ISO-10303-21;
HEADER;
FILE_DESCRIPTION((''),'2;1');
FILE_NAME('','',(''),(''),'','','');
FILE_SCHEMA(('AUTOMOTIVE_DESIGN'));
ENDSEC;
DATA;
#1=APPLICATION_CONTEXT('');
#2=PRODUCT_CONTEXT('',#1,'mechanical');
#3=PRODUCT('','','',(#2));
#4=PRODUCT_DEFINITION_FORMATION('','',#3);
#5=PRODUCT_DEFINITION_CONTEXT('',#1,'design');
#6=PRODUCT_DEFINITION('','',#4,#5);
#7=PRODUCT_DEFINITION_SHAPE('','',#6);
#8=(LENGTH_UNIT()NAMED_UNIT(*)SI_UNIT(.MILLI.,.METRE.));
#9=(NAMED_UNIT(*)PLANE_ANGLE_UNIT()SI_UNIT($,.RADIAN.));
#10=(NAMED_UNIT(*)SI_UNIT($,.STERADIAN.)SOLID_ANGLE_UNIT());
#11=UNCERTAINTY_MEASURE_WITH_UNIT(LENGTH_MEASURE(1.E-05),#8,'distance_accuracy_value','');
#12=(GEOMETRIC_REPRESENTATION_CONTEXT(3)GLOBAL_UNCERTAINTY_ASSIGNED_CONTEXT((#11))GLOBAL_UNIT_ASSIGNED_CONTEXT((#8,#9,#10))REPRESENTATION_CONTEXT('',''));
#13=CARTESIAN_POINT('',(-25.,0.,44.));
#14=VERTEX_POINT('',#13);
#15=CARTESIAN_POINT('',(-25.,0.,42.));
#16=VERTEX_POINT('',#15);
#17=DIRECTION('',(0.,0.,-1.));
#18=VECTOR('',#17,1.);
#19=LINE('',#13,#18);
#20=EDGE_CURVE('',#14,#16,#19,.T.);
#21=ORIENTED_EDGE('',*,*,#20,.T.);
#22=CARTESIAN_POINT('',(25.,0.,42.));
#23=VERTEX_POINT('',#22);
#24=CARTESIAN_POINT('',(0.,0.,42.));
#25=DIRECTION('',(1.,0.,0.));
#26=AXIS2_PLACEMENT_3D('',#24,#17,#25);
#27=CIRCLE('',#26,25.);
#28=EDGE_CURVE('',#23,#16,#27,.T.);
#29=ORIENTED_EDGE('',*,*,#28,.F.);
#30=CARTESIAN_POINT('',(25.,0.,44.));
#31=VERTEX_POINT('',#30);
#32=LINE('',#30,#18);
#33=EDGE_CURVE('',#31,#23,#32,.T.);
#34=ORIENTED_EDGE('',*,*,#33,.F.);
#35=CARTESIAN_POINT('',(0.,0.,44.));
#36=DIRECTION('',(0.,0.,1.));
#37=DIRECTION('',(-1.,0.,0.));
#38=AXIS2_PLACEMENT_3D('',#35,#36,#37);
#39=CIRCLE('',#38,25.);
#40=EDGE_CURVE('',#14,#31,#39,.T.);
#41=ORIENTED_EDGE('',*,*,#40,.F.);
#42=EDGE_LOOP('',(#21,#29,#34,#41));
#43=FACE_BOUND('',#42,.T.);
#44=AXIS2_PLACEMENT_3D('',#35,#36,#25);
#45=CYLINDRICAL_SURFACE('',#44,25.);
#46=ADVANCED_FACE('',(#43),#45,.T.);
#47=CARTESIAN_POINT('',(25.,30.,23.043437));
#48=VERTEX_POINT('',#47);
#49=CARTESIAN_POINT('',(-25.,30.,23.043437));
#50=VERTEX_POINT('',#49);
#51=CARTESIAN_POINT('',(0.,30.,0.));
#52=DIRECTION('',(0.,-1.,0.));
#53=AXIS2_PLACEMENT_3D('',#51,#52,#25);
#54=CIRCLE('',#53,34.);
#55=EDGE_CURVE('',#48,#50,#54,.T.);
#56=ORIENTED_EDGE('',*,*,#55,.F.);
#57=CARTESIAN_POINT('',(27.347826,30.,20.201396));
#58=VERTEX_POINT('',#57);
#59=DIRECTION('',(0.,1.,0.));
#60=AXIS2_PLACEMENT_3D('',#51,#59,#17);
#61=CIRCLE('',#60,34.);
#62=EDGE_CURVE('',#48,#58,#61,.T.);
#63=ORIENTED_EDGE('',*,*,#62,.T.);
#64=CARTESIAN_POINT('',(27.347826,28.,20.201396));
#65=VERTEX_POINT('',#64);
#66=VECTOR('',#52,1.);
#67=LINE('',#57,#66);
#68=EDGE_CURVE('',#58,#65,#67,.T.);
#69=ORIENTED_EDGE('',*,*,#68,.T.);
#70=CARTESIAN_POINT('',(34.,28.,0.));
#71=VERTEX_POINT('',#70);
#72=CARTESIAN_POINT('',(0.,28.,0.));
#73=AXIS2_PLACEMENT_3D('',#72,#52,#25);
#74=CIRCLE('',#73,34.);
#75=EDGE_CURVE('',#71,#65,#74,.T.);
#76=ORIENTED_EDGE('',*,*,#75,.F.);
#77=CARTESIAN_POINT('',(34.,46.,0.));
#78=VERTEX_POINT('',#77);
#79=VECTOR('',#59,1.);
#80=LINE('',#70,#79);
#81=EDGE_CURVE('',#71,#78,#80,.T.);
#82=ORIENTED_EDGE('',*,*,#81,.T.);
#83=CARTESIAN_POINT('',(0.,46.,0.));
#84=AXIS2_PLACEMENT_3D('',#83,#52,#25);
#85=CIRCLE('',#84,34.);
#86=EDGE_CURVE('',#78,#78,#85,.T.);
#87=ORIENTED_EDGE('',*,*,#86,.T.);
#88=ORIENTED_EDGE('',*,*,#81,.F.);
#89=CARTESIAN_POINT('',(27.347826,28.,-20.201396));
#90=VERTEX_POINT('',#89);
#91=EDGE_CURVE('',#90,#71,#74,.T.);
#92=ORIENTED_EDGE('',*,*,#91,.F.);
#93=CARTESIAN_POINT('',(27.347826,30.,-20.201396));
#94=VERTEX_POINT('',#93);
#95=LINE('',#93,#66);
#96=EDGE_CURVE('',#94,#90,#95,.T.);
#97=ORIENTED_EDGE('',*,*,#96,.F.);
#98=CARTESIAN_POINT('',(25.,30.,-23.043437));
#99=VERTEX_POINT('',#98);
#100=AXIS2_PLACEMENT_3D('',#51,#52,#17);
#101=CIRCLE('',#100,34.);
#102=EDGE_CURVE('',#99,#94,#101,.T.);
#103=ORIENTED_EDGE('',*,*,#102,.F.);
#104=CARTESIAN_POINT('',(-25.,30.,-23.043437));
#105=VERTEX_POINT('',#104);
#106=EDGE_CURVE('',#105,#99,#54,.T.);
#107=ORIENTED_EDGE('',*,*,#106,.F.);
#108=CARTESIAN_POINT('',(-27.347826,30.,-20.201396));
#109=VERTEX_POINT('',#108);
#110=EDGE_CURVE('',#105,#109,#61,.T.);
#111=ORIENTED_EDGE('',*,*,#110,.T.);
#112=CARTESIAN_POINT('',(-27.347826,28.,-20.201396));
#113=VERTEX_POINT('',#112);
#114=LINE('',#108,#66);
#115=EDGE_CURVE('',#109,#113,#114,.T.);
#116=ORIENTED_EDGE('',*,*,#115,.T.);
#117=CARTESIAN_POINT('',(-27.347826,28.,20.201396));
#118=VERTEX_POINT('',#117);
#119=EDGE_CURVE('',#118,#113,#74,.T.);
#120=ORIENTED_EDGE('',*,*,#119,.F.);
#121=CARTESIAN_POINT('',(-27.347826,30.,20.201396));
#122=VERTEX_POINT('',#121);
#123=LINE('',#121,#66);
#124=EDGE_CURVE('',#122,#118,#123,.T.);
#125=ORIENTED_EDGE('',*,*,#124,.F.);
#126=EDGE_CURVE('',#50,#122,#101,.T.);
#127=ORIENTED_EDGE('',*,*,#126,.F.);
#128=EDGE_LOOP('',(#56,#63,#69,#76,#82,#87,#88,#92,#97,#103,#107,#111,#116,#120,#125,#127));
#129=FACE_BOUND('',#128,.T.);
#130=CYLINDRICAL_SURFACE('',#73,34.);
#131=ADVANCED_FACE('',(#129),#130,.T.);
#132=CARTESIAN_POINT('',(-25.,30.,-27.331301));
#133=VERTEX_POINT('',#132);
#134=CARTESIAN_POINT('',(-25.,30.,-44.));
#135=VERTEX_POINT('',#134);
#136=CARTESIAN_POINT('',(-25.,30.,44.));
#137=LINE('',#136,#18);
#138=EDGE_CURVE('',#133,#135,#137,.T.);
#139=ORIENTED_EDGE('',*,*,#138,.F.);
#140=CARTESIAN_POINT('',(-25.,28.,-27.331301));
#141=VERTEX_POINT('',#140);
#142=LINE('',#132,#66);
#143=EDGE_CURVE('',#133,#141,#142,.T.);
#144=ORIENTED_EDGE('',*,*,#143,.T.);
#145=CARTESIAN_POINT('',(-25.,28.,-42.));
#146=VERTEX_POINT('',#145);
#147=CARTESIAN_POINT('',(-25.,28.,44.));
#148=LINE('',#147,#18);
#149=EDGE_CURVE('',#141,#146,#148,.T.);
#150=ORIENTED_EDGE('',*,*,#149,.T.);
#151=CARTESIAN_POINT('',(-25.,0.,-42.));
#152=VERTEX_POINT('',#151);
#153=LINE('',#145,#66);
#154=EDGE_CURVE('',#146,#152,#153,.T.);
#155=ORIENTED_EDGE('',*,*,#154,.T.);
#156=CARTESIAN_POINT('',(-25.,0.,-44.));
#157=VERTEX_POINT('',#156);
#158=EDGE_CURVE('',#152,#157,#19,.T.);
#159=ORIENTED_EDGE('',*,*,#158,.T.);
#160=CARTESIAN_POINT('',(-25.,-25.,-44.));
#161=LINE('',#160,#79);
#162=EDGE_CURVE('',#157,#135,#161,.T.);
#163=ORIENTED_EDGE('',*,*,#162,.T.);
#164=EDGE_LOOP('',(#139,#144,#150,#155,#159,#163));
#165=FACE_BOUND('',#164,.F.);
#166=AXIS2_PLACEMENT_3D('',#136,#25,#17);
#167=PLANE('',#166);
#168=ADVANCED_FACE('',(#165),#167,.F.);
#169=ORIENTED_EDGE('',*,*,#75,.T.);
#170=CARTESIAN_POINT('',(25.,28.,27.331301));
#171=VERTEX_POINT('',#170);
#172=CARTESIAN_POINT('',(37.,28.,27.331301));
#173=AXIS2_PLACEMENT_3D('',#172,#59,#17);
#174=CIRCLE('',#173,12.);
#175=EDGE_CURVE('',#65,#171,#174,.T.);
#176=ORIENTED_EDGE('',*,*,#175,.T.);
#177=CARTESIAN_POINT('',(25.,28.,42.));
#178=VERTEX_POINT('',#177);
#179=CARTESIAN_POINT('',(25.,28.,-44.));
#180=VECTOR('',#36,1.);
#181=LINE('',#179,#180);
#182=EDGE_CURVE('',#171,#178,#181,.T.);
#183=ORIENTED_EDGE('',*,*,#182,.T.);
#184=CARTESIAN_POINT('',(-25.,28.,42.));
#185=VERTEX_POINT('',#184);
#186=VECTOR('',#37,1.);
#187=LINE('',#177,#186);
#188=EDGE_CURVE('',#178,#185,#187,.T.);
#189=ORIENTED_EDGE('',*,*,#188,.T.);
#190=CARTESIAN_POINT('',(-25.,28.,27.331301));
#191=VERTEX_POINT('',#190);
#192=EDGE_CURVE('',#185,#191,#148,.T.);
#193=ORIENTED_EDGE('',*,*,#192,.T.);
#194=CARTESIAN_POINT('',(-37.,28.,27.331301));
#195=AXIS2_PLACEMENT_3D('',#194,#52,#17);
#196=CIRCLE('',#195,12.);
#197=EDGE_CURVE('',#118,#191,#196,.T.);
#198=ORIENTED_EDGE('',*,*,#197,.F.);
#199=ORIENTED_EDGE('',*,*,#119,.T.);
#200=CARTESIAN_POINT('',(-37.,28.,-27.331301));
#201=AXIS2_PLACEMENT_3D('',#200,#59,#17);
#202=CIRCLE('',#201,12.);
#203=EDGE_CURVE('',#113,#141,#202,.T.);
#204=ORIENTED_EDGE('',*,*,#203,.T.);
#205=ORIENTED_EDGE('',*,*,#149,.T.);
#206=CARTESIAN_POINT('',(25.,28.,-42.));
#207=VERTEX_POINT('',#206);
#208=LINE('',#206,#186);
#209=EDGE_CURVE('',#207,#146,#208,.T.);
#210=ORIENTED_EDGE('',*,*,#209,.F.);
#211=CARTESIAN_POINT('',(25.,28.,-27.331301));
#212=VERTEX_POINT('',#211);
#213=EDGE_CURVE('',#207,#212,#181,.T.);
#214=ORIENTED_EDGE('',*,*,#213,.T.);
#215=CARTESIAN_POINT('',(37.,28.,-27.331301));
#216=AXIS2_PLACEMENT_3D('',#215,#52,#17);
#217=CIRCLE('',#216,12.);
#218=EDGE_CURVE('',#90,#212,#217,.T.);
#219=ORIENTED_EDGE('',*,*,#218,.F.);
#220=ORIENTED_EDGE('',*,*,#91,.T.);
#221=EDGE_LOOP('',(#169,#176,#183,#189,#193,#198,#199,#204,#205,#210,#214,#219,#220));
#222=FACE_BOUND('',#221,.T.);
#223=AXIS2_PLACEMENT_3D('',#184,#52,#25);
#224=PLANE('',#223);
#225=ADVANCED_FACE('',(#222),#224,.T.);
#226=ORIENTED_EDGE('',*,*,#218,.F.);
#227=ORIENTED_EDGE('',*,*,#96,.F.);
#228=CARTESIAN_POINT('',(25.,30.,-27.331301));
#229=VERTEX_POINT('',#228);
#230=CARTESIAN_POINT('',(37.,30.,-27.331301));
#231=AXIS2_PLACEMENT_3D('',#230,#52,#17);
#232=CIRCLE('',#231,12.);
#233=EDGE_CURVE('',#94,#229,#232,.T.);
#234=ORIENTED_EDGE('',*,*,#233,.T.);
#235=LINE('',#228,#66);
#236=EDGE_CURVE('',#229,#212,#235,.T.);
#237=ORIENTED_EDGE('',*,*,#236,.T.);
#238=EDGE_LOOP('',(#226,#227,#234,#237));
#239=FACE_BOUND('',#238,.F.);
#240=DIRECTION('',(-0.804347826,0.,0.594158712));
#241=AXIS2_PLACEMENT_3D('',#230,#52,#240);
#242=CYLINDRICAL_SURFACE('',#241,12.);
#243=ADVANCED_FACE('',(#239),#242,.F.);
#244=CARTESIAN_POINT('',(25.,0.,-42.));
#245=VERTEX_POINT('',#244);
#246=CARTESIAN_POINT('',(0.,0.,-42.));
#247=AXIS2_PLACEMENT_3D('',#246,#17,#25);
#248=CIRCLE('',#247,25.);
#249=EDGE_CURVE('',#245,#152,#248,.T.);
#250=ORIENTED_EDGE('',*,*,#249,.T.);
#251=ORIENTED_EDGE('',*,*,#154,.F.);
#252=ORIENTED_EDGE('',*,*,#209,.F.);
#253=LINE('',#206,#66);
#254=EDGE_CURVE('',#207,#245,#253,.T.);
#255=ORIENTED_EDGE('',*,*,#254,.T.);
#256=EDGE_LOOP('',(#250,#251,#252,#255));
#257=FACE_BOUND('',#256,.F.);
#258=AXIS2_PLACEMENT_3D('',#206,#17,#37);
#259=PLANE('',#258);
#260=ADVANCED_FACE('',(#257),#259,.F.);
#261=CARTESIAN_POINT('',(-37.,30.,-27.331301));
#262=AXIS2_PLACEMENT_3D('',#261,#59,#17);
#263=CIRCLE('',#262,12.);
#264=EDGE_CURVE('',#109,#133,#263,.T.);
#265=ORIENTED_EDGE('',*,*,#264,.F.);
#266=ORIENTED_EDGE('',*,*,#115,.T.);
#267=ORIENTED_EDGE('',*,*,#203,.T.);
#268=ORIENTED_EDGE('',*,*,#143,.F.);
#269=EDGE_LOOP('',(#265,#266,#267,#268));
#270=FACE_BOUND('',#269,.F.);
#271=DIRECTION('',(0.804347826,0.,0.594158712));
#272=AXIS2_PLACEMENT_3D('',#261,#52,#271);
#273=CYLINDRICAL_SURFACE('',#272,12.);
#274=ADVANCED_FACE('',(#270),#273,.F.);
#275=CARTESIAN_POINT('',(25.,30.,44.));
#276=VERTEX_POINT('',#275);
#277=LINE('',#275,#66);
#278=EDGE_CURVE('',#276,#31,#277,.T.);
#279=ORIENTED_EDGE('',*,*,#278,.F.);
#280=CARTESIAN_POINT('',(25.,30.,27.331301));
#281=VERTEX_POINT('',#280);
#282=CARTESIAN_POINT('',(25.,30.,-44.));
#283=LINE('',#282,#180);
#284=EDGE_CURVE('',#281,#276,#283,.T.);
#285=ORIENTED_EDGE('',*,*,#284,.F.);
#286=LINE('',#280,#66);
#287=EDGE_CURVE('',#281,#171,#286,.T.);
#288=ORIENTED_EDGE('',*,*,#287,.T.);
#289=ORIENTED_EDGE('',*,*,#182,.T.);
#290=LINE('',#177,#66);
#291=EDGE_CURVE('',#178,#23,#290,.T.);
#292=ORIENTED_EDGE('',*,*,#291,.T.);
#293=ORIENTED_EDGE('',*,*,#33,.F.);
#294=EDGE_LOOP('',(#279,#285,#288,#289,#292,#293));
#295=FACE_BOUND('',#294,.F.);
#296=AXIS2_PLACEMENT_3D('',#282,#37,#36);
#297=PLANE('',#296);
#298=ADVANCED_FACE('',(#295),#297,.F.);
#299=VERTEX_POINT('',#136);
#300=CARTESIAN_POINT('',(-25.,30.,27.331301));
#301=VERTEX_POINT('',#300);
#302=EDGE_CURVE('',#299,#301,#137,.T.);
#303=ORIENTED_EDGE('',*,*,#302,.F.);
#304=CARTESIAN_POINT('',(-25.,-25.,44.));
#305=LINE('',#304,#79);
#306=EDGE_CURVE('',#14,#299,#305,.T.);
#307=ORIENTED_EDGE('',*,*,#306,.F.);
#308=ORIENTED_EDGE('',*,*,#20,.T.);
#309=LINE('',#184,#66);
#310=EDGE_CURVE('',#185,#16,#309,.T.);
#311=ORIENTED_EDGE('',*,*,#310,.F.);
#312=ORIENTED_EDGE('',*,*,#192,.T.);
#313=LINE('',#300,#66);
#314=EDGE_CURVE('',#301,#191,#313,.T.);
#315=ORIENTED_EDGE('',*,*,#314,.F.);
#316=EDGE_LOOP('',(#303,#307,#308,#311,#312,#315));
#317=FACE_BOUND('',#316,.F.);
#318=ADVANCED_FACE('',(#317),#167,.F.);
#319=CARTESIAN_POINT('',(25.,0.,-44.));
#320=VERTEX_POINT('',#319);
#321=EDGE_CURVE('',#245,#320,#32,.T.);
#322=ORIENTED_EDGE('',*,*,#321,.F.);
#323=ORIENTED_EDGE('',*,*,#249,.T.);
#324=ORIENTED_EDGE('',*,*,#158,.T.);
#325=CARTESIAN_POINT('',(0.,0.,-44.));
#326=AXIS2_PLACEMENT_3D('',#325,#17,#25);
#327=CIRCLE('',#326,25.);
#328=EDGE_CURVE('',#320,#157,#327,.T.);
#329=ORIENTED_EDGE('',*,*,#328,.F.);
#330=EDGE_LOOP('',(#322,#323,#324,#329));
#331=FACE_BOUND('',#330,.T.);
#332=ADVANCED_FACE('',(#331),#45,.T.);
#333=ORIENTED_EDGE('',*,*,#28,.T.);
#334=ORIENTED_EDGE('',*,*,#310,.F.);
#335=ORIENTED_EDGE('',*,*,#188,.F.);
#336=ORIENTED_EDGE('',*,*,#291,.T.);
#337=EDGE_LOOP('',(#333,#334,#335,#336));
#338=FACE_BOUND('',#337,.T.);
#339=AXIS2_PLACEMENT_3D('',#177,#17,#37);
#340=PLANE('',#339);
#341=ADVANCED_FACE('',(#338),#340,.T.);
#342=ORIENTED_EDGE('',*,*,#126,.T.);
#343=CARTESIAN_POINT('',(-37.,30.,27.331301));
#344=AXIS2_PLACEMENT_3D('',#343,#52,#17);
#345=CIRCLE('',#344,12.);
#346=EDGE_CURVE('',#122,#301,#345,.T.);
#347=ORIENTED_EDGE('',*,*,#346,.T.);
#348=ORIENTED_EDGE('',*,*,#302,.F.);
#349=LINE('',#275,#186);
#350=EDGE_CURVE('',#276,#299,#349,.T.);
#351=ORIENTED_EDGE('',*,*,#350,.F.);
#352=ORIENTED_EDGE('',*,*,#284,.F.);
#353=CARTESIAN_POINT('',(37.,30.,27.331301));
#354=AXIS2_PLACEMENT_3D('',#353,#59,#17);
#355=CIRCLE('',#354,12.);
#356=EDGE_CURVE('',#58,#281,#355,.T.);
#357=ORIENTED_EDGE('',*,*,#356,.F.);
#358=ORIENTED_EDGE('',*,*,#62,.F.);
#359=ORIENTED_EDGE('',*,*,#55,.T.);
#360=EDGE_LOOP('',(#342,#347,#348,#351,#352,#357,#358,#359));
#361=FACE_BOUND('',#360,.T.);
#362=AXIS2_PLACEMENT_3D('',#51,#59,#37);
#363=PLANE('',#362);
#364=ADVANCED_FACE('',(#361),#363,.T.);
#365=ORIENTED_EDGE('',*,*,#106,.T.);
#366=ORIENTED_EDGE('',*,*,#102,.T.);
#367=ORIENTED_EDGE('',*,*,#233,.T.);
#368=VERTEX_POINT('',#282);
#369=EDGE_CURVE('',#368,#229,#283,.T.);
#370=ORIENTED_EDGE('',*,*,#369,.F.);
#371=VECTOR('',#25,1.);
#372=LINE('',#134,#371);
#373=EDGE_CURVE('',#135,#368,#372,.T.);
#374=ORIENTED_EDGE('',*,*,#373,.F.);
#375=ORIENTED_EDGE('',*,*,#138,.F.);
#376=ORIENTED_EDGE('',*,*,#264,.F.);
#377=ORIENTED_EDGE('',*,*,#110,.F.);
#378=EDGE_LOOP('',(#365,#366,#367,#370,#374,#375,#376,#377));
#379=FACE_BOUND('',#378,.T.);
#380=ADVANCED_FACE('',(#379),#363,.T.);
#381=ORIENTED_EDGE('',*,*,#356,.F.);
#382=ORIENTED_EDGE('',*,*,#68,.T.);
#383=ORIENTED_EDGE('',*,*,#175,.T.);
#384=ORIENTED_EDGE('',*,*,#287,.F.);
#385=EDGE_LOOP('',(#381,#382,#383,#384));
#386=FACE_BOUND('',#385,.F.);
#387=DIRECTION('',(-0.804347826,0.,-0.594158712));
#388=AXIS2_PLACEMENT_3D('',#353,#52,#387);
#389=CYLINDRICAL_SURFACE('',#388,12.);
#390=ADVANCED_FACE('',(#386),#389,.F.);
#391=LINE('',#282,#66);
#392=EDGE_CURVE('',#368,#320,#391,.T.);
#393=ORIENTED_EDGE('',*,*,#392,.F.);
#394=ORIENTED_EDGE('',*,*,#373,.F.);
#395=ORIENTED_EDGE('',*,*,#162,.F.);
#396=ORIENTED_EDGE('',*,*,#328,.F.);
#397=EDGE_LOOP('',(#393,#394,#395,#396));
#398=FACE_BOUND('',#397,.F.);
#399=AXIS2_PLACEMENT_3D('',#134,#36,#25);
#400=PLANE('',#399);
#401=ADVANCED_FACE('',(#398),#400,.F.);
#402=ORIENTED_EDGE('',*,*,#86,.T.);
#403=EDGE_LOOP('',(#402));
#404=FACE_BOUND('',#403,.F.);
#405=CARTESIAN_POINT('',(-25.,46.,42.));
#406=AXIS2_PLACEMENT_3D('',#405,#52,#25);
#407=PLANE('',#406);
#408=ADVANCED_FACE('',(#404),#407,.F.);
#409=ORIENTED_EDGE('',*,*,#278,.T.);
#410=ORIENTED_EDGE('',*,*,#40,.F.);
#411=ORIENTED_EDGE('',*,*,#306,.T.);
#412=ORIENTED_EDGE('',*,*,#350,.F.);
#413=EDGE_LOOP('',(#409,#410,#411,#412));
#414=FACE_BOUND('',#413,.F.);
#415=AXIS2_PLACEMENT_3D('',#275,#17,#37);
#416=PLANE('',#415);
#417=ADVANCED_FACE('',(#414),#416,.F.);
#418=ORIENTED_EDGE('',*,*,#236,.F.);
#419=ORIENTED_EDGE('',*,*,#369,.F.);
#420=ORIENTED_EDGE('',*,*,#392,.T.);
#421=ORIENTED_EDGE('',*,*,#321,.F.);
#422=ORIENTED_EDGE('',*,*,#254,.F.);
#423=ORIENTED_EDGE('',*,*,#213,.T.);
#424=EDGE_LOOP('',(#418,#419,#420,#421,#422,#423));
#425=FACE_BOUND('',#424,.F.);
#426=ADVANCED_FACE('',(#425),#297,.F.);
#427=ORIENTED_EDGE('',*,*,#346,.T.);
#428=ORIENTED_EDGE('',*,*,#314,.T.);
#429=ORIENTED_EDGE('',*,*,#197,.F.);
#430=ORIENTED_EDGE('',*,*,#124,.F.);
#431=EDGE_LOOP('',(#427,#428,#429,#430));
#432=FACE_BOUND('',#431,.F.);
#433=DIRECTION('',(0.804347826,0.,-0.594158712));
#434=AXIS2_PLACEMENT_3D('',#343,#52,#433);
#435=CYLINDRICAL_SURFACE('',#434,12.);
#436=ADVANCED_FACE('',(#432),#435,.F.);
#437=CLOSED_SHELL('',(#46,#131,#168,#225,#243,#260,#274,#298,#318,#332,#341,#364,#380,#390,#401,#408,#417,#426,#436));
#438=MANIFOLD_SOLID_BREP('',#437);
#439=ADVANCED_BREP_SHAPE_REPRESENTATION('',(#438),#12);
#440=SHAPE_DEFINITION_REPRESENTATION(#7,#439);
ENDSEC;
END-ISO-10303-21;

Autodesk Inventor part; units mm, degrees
ref_plane "YZ Plane" through (0, 0, 0) normal (1, 0, 0) x (0, 1, 0)
ref_plane "XZ Plane" through (0, 0, 0) normal (0, 1, 0) x (-1, 0, 0)
ref_plane "XY Plane" through (0, 0, 0) normal (0, 0, 1) x (1, 0, 0)
sketch "スケッチ1" plane through (0, 0, 0) normal (0, 1, 0) x (-1, 0, 0)
  line L0 (25, -44) -> (-25, -44)
  line L1 (-25, -44) -> (-25, 44)
  line L2 (-25, 44) -> (25, 44)
  line L3 (25, 44) -> (25, -44)
  line L4 (25, -44) -> (-25, 44) construction
  line L5 (-25, -44) -> (25, 44) construction
  point P0 (0, 0)
  dimension "d0" = 50
  dimension "d1" = 88
extrude "押し出し1" add sketch "スケッチ1" against normal blind 2
sketch "スケッチ2" plane through (0, -2, 0) normal (0, -1, 0) x (1, 0, 0)
  line L0 (-25, 44) -> (-25, -44) projected
  line L1 (25, -44) -> (25, 44) projected
  line L2 (-25, -44) -> (25, -44)
  line L3 (25, -44) -> (25, -42)
  line L4 (25, -42) -> (-25, -42)
  line L5 (-25, -42) -> (-25, -44)
  line L6 (25, 44) -> (-25, 44) projected
  line L7 (-25, 44) -> (25, 44)
  line L8 (25, 44) -> (25, 42)
  line L9 (25, 42) -> (-25, 42)
  line L10 (-25, 42) -> (-25, 44)
  point P0 (0, 0)
  point P1 (-25, 42)
  point P2 (25, 42)
  point P3 (25, -44)
  dimension "d4" = 2
  dimension "d5" = 2
extrude "押し出し2" add sketch "スケッチ2" along normal blind 53 contours L6 L1 L9 L0 | L4 L1 L2 L0
sketch "スケッチ3" plane through (-25, 0, 44) normal (0, 0, 1) x (1, 0, 0)
  line L0 (0, 0) -> (50, 0) projected
  line L1 (0, 0) -> (0, -55) projected
  line L2 (50, -55) -> (0, -55) projected
  line L3 (50, 0) -> (50, -55) projected
  circle A0 centre (25, -30) radius 25
  line L4 (50, 0) -> (50, -55) projected
  point P0 (25, 0)
  point P1 (50, -30)
  point P2 (25, -55)
  point P3 (0, -30)
extrude "押し出し3" cut sketch "スケッチ3" against normal through all contours A0 L2 L1 | L3 L2 A0
move or copy body "移動1" bodies to move or copy 1 copy no translate (0, 30, 0)
sketch "スケッチ4" plane through (-25, 28, 42) normal (0, -1, 0) x (1, 0, 0)
  circle A0 centre (25, -42) radius 34
  dimension "d14" = 68
extrude "押し出し4" add sketch "スケッチ4" against normal blind 18
fillet "フィレット2" radius 12 4 edges at (25, 29, 23.0434) (25, 29, -23.0434) (-25, 29, 23.0434) (-25, 29, -23.0434)
properties part number "link4"
